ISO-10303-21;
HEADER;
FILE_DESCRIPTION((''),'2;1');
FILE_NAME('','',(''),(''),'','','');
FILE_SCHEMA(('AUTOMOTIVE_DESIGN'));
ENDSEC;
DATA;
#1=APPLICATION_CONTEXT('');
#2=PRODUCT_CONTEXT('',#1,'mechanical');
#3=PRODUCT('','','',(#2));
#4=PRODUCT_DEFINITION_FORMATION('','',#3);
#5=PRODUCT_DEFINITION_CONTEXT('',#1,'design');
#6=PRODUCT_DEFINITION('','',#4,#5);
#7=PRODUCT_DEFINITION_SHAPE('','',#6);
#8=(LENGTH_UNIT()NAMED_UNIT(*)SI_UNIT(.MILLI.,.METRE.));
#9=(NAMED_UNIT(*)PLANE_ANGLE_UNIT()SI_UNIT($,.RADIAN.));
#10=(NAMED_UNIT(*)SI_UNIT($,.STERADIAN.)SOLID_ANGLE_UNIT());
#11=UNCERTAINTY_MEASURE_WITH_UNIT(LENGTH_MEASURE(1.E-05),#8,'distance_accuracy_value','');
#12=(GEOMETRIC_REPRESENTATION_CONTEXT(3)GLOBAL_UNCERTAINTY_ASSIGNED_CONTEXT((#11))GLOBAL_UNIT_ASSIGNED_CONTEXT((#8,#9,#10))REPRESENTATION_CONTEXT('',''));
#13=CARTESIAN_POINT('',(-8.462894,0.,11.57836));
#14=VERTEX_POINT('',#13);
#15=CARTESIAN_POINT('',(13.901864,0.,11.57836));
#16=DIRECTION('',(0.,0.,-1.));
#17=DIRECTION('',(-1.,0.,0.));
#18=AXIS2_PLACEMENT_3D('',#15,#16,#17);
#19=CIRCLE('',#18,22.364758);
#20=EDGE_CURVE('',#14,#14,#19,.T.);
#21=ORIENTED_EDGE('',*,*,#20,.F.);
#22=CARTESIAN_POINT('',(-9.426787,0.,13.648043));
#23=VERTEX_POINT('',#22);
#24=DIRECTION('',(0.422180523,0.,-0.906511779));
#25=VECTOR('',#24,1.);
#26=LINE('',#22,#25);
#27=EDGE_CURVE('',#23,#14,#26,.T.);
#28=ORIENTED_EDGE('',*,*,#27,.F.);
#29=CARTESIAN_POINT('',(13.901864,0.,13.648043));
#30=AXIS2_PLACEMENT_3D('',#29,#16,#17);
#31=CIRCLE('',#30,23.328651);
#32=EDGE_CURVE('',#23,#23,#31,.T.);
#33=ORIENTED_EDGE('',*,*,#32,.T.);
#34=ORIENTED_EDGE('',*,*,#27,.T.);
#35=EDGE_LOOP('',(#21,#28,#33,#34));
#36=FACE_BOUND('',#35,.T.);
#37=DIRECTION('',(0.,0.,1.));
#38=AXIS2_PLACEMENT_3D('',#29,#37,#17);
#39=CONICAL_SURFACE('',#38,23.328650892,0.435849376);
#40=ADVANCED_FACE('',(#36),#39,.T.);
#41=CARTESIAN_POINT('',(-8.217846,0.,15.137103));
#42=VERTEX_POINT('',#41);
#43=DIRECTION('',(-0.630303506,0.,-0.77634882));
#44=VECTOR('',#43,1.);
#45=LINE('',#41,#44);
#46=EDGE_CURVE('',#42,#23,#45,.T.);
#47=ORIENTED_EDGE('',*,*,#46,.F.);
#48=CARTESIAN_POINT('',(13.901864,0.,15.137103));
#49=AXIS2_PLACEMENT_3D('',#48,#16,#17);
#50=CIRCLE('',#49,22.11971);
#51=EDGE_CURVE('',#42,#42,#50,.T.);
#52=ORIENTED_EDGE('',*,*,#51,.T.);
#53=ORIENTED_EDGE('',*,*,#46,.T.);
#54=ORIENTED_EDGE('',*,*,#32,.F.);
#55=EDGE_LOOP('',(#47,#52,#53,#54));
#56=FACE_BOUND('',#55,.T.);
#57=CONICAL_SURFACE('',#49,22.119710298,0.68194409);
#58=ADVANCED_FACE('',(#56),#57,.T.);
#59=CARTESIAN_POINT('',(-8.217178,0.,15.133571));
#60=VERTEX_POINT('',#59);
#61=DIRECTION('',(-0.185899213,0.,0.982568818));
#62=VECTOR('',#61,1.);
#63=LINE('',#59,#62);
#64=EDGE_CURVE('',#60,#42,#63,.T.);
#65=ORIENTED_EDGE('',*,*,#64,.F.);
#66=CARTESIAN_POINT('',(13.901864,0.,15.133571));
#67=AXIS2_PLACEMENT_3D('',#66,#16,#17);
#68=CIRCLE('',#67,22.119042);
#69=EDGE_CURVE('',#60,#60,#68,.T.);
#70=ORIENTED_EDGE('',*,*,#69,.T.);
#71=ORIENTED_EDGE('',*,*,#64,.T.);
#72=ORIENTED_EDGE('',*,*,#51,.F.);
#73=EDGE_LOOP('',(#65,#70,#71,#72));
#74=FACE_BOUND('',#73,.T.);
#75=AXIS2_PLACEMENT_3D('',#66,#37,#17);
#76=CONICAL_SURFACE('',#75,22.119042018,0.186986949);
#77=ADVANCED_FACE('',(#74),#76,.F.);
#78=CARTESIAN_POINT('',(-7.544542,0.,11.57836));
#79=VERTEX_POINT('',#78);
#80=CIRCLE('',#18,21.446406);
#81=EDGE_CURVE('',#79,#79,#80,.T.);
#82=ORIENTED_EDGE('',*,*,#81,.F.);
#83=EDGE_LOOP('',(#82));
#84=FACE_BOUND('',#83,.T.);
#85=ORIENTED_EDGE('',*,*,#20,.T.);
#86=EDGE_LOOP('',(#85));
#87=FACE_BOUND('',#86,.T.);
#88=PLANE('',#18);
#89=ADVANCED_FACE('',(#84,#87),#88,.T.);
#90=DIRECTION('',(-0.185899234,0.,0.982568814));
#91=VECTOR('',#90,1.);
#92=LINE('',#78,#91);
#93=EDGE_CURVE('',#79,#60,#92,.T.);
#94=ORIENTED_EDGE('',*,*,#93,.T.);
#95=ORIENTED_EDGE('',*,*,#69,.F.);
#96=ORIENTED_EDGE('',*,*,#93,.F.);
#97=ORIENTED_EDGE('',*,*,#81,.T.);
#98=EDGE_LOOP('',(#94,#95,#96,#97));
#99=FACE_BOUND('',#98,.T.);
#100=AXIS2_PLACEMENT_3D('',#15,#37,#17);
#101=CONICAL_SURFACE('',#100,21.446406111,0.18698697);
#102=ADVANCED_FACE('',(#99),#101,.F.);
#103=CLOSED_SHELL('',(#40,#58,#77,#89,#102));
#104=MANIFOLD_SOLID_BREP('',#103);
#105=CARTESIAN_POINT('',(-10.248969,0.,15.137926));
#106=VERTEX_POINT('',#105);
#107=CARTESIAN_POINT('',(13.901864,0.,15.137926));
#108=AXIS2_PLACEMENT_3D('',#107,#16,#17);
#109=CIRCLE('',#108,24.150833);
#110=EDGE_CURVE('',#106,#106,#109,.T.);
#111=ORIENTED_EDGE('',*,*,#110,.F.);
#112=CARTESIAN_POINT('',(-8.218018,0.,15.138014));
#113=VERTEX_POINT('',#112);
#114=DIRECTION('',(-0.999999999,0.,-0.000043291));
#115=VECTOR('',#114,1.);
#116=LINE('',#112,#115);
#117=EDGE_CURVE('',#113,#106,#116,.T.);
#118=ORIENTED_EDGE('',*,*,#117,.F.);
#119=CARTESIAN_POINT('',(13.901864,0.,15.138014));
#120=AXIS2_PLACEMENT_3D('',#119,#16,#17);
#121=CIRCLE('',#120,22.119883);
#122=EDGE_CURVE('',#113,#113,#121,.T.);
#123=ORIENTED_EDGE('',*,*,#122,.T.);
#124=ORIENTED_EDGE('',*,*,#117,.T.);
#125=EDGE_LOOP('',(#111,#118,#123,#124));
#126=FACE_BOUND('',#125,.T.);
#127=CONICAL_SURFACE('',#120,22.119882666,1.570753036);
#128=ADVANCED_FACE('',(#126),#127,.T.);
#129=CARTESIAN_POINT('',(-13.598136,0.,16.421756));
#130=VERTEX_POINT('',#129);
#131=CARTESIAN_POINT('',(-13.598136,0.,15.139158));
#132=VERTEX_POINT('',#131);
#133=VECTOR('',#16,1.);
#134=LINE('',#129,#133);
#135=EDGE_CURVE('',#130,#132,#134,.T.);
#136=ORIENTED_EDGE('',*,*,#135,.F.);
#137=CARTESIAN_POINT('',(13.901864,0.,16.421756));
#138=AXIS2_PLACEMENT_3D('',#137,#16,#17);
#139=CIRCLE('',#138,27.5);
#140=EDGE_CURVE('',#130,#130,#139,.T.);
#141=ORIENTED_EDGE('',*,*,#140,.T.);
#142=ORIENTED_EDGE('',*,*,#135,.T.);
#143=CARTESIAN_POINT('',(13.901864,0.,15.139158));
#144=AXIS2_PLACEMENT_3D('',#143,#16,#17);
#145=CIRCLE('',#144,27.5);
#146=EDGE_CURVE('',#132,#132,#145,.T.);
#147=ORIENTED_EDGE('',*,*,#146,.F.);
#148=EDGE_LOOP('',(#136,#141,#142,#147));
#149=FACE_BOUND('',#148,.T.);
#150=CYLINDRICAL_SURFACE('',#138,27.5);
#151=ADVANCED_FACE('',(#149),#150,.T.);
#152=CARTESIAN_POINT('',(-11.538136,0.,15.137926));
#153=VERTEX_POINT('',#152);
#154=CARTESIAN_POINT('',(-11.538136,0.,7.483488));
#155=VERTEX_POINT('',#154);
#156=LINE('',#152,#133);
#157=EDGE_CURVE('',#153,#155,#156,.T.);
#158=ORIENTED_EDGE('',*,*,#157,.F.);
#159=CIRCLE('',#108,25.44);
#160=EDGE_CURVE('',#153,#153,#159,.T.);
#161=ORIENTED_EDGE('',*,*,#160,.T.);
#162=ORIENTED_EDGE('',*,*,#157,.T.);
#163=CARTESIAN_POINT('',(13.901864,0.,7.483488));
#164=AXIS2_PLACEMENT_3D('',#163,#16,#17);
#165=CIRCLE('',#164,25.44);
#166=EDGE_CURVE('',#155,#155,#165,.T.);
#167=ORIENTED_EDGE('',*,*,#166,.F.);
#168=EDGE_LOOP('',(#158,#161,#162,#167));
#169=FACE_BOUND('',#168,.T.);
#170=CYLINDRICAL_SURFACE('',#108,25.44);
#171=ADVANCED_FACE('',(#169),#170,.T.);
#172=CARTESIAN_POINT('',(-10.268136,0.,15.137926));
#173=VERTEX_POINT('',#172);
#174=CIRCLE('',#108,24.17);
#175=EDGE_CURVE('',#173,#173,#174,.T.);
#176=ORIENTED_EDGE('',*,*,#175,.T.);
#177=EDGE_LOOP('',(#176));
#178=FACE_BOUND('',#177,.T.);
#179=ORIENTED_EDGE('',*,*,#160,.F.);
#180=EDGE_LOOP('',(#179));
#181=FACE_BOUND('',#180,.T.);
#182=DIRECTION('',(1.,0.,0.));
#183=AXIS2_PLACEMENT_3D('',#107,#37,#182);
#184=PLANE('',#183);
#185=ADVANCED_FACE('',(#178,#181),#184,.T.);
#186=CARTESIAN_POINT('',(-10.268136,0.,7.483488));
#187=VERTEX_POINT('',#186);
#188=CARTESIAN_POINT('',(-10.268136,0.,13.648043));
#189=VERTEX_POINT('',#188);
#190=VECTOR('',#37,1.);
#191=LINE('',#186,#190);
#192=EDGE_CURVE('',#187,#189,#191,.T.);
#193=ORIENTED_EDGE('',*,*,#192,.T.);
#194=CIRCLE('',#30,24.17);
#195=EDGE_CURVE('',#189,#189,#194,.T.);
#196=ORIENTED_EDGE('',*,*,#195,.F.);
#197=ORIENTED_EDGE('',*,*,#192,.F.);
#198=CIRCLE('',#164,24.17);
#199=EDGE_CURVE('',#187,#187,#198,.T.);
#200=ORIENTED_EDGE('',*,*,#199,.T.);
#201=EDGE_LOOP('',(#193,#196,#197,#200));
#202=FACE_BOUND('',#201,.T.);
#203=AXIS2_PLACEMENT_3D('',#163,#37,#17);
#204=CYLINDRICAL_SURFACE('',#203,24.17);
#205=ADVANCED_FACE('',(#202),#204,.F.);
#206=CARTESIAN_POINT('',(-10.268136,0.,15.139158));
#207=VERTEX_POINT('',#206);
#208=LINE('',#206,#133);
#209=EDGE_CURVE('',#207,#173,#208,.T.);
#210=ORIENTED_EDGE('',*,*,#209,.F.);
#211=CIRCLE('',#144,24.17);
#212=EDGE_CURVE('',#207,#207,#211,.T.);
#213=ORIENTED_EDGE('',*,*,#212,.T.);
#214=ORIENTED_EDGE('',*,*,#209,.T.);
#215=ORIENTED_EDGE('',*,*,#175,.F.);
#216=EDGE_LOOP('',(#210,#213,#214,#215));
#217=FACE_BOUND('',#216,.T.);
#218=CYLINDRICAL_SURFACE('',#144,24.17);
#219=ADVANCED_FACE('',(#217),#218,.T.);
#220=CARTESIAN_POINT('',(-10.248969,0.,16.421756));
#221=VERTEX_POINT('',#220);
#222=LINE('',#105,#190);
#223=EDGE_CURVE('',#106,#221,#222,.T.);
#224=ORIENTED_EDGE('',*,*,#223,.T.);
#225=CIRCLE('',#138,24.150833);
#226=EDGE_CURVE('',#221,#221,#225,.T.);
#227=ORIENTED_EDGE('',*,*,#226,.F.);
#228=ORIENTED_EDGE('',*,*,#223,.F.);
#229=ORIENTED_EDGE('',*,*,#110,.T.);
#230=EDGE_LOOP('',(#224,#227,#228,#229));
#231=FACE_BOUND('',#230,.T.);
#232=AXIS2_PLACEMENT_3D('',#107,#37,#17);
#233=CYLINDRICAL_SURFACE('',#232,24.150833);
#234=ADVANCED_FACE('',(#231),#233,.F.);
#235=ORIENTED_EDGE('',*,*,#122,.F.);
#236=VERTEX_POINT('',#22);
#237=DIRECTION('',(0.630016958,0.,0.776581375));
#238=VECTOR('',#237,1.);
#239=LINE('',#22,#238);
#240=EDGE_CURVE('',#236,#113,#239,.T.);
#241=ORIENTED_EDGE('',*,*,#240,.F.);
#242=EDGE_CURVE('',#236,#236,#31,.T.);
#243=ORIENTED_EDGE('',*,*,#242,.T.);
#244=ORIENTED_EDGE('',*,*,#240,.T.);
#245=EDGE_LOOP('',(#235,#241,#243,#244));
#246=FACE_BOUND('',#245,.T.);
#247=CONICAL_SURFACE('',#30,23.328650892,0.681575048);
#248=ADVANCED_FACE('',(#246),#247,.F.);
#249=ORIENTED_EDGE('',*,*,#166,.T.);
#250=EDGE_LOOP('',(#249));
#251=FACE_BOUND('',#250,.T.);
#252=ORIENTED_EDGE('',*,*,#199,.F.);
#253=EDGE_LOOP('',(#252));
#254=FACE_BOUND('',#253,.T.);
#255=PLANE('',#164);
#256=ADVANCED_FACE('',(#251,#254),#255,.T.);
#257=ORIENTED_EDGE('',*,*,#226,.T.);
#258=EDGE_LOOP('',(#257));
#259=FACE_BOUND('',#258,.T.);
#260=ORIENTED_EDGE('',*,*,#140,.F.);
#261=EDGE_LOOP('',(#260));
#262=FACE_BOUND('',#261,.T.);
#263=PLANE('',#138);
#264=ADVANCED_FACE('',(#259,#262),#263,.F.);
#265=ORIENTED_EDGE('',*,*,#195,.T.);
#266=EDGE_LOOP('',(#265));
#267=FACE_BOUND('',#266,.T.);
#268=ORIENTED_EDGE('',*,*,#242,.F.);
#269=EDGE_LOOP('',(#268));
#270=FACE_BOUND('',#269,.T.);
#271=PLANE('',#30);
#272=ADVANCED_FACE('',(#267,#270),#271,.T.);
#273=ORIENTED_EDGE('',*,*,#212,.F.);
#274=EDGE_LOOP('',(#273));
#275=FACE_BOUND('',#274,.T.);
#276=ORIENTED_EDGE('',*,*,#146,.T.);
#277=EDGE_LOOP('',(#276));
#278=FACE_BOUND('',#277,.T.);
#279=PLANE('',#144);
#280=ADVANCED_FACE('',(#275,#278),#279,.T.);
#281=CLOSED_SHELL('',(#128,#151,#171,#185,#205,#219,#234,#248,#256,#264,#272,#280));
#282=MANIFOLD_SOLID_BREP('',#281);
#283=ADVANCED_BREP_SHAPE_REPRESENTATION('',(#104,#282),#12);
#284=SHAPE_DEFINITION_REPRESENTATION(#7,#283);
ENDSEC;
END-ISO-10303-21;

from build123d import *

# Parameters (mm, degrees)
F0_W = 1.2508329971
F0_H = 1.489882911


# Not quite as in the source:
# - ends of sketch curves that miss each other by under 0.0002 mm in the source are joined


with BuildPart() as f1:
    # F0 (on Front) → F1 (revolve)
    with BuildSketch(Plane.XZ):
        Polygon((-10.2681356725, 15.1391583099), (-10.2681356725, 15.1379262976), (-10.2489686697, 15.1379262976), (-10.2489686697, 16.4217564627), (-10.2681356725, 16.4217564627), (-13.5981356725, 16.4217564627), (-13.5981356725, 15.1391583099), (-11.5381356725, 15.1391583099), align=None)
        with Locations((-10.8935521711, 14.3929848421)):
            Rectangle(F0_W, F0_H)
        Polygon((-10.2489686697, 15.1379262976), (-10.2681356725, 15.1379262976), (-10.2681356725, 13.6480433866), (-9.4267865643, 13.6480433866), (-8.2180183381, 15.1380142197), align=None)
        Polygon((-11.5189686697, 13.6480433866), (-11.5189686697, 15.1379262976), (-11.5381356725, 15.1379262976), (-11.5381356725, 7.4834876391), (-10.2681356725, 7.4834876391), (-10.2681356725, 13.6480433866), align=None)
    revolve(axis=Axis((13.9018643275, 0, 9.1203928459), (0, 0, -1)))


with BuildPart() as f1b:
    # F0 (on Front) → F1, piece 2 (revolve)
    with BuildSketch(Plane.XZ):
        Polygon((-8.2171776903, 13.6480433866), (-9.4267865643, 13.6480433866), (-8.4628937766, 11.5783596411), (-7.5445417837, 11.5783596411), (-8.2171776903, 15.1335709829), align=None)
        Polygon((-8.2178459705, 15.1371031726), (-9.4267865643, 13.6480433866), (-8.2171776903, 13.6480433866), (-8.2171776903, 15.1335709829), align=None)
    revolve(axis=Axis((13.9018643275, 0, 9.1203928459), (0, 0, -1)))


solid = Compound([f1.part, f1b.part])
